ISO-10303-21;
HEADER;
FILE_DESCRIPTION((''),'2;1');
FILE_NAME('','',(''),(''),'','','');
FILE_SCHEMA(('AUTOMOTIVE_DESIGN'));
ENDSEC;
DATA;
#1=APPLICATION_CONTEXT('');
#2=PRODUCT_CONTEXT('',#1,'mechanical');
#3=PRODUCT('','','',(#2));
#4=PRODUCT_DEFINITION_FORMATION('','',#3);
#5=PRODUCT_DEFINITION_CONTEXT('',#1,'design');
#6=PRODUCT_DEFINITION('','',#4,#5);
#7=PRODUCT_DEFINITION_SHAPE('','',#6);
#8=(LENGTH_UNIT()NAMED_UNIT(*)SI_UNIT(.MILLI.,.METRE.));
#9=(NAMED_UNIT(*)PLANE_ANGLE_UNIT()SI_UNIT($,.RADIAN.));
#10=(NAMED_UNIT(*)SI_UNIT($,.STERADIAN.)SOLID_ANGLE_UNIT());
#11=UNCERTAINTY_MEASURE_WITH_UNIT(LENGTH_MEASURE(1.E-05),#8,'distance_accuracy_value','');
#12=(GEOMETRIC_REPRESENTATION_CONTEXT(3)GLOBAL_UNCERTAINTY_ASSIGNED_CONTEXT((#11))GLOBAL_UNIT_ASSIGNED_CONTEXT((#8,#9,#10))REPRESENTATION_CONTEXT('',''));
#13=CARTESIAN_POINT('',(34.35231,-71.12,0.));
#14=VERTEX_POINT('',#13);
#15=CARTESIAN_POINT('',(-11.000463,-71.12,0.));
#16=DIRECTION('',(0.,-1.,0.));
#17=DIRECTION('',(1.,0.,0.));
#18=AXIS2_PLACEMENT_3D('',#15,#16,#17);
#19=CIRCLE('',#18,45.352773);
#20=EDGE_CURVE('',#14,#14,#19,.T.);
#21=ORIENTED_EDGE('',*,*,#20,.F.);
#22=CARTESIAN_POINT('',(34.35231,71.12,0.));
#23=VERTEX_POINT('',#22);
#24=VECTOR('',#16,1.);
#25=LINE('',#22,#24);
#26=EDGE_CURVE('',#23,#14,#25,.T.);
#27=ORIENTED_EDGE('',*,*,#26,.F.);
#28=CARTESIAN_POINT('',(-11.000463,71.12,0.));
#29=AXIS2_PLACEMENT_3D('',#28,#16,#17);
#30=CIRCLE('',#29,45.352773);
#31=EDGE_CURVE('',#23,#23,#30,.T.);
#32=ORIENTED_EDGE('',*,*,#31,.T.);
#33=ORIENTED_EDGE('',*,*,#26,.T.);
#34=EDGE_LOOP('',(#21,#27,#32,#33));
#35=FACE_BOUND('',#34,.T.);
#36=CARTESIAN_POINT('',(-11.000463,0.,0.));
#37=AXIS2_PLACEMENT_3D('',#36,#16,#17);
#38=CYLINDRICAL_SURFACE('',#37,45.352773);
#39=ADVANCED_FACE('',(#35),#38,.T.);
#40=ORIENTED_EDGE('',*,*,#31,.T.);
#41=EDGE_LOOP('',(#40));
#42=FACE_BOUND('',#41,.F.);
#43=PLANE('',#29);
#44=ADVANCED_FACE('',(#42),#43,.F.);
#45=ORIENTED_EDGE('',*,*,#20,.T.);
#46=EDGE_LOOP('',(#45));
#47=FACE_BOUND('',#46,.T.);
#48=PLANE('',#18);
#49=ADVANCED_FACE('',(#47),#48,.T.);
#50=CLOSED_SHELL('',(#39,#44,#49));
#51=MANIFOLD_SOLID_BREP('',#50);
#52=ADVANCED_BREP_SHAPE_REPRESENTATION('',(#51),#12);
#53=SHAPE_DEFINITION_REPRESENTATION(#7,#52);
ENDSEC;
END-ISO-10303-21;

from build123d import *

# Parameters (mm, degrees)
F0_R     = 45.3527731197
F0_R_2   = 11.0004628077
F1_DEPTH = 71.12


# Not quite as in the source:
# - the program builds the solid bodies; features that only make, move or delete a surface that nothing else refers to are left out


with BuildPart() as f1:
    # F0 (on Front) → F1 (new body, symmetric)
    with BuildSketch(Plane.XZ):
        with Locations((-11.0004628077, 0)):
            Circle(F0_R)
        with Locations((-11.0004628077, 0)):
            Circle(F0_R_2, mode=Mode.SUBTRACT)
        with Locations((-11.0004628077, 0)):
            Circle(F0_R_2)
    extrude(amount=F1_DEPTH, both=True)


solid = f1.part
